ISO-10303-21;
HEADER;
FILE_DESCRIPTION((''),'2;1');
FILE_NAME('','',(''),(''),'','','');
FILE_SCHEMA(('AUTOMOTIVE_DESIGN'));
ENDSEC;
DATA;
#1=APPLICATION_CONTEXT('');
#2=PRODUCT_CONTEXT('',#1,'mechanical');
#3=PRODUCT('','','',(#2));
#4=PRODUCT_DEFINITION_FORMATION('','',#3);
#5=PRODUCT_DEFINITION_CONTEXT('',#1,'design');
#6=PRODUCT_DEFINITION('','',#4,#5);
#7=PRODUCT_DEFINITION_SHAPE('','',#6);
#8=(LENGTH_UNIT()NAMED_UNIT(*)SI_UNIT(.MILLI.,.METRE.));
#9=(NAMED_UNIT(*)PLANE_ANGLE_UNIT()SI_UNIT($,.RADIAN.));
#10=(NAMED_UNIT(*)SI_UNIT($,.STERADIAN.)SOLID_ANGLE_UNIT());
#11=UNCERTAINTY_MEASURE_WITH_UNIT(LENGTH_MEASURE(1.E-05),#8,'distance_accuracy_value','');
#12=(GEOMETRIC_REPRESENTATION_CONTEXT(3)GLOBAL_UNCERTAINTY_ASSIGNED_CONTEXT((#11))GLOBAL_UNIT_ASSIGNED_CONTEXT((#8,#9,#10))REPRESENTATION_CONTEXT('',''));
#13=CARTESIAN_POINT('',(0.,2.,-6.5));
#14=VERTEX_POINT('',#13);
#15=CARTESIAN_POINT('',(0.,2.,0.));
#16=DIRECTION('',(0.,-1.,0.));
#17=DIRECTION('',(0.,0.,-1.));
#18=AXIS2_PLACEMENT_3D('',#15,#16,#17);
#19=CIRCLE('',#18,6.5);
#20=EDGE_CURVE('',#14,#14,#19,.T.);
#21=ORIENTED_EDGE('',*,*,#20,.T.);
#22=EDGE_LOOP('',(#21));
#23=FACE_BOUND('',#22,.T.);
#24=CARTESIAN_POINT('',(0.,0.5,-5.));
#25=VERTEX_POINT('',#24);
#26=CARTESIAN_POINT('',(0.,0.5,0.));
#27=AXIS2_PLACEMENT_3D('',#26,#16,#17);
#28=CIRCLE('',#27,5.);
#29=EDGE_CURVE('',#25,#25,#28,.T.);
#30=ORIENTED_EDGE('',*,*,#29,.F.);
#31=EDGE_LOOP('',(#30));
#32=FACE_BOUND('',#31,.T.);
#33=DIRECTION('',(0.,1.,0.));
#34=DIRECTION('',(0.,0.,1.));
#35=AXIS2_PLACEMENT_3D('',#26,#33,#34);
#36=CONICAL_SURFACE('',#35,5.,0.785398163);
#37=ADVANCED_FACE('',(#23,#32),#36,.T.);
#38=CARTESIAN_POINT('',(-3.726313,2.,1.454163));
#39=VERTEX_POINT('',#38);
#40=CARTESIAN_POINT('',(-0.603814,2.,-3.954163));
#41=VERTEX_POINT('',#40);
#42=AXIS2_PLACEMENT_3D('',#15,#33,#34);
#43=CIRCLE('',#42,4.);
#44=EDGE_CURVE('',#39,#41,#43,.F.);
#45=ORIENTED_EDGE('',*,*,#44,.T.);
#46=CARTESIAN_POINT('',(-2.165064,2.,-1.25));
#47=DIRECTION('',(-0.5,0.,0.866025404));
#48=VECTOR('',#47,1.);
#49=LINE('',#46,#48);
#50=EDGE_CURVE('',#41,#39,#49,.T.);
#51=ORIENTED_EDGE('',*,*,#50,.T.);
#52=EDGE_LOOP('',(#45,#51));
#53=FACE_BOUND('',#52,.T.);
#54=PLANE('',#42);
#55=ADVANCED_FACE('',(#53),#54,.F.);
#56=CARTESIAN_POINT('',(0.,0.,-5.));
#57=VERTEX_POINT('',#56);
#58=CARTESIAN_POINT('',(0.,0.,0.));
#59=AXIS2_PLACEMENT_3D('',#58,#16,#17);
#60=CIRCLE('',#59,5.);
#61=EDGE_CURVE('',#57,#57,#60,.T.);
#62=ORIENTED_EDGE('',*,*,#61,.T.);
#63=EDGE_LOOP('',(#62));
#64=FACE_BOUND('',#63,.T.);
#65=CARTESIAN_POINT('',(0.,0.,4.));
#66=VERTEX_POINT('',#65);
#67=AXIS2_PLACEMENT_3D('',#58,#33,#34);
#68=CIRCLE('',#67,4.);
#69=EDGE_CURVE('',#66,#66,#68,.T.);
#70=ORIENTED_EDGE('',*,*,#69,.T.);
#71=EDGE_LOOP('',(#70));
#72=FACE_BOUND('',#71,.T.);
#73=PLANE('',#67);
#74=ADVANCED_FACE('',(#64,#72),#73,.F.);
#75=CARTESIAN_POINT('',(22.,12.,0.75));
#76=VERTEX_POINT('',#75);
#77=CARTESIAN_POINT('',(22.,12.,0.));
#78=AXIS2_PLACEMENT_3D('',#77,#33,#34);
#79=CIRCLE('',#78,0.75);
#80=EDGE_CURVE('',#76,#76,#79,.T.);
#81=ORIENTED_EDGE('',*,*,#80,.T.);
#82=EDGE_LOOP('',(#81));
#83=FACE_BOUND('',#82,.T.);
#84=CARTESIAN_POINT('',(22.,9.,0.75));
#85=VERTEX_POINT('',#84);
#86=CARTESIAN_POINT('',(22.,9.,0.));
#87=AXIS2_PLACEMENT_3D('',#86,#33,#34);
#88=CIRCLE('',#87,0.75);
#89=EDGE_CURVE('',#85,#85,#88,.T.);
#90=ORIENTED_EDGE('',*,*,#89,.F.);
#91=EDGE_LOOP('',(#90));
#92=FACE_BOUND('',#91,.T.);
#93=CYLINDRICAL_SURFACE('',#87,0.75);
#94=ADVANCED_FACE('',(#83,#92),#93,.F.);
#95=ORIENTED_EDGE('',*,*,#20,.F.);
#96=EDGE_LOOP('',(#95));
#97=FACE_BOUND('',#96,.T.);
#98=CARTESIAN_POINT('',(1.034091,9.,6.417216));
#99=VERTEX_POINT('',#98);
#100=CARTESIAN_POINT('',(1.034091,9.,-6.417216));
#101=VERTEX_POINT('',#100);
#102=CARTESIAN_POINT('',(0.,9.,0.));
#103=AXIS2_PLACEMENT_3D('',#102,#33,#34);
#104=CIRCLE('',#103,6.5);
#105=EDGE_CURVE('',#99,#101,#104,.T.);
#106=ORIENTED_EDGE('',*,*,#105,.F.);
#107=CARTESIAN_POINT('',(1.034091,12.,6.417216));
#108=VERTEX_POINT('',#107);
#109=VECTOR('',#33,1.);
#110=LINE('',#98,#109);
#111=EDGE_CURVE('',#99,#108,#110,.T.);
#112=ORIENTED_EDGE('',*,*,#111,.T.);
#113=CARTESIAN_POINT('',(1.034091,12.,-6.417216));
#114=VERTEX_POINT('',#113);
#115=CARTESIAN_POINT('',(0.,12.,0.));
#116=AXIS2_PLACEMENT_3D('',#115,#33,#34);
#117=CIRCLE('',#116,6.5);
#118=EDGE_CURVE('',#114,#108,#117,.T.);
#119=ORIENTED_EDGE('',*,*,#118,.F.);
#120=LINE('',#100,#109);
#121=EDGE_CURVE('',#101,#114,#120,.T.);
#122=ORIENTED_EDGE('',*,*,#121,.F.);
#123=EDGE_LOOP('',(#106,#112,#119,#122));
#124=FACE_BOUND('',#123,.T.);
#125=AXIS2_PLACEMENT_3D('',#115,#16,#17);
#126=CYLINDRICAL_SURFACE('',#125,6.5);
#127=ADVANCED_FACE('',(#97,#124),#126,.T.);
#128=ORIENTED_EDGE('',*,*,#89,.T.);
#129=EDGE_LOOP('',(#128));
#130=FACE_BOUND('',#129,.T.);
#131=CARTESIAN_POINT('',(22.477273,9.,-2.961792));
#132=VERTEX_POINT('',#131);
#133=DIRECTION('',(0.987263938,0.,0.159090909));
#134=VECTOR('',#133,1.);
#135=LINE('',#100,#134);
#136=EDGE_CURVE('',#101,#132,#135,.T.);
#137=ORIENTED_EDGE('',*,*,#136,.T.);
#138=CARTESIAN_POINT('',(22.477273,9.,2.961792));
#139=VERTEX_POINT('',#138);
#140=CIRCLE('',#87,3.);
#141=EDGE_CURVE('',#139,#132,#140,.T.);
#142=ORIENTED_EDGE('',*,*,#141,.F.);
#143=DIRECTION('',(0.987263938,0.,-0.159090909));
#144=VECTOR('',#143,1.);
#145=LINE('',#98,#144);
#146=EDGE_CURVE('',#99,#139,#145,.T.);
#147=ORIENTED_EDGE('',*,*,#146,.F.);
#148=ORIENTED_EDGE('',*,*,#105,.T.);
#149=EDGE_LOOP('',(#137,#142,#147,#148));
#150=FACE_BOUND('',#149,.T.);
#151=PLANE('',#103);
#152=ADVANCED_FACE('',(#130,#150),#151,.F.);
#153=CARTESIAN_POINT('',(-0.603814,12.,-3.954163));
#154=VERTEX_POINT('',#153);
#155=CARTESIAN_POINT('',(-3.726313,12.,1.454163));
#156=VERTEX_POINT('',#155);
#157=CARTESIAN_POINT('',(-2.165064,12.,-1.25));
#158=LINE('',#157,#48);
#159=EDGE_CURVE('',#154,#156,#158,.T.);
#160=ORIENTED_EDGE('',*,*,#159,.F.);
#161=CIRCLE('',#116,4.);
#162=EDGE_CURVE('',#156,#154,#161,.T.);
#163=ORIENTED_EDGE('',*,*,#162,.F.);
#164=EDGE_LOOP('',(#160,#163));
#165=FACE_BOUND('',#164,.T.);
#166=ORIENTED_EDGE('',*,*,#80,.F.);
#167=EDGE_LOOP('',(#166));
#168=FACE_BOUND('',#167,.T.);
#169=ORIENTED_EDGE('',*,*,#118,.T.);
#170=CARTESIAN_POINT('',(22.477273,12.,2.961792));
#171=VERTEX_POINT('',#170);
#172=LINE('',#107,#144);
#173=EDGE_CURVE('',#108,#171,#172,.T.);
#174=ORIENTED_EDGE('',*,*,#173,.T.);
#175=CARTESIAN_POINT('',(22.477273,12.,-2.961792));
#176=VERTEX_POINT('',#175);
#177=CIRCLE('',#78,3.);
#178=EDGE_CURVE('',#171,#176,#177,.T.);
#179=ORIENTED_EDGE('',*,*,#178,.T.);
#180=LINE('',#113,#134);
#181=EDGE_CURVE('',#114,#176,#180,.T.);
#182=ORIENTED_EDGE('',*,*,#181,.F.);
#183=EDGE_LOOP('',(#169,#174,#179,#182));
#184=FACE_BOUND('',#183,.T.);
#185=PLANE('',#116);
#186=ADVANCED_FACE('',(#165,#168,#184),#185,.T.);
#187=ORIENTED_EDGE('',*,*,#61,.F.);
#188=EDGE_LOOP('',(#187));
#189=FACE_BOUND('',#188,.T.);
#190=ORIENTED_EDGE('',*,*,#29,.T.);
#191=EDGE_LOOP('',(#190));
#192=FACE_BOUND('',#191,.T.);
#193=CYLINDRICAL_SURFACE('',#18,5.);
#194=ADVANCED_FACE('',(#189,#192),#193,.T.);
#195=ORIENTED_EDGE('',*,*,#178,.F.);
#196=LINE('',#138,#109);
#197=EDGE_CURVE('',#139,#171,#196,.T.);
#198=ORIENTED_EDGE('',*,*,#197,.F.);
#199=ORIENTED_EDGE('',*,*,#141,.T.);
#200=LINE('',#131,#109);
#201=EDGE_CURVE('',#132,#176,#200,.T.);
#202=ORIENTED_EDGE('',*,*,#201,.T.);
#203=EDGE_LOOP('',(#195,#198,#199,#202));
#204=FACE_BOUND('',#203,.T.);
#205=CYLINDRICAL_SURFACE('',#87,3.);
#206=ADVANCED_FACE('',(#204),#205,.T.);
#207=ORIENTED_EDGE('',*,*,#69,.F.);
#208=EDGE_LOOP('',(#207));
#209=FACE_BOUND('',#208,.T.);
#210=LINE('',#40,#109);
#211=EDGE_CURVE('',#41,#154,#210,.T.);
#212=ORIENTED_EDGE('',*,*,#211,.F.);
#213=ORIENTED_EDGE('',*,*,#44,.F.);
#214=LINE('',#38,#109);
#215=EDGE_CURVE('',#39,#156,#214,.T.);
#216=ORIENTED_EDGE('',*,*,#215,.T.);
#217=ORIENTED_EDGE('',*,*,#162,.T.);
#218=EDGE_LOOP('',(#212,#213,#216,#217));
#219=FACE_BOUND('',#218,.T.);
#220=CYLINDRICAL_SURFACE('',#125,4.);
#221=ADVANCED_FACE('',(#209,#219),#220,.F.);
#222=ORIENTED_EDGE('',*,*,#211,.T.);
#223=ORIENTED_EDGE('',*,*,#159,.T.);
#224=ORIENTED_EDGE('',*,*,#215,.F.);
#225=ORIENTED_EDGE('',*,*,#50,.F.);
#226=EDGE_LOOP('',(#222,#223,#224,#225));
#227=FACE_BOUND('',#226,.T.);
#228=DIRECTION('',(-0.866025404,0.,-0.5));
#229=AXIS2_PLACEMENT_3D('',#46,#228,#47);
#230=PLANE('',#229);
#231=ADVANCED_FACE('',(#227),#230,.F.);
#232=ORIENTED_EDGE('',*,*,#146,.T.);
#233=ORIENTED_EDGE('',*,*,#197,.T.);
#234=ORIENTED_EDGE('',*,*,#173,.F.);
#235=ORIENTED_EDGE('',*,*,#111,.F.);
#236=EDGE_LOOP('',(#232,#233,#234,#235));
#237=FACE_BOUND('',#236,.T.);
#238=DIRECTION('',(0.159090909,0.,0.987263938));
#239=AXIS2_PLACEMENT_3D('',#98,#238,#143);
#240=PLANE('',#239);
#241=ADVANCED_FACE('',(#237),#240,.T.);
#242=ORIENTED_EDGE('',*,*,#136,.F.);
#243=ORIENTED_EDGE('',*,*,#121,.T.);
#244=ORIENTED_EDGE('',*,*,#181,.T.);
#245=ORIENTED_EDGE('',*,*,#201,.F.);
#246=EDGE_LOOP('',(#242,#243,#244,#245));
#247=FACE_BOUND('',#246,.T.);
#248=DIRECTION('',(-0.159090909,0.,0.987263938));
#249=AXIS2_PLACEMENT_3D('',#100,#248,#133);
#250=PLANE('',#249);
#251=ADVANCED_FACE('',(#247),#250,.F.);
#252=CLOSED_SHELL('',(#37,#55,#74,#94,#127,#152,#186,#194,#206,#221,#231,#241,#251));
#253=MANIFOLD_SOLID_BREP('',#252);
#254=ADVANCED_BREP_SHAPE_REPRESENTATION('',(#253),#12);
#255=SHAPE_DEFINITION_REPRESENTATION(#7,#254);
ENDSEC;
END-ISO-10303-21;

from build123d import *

# Parameters (mm, degrees)
SKETCH1_R           = 6.5
SKETCH1_R_2         = 4
BOSS_EXTRUDE1_DEPTH = 12
BOSS_EXTRUDE2_START = -3
SKETCH2_R           = 0.75
BOSS_EXTRUDE2_DEPTH = 3
SKETCH4_R           = 6.5
SKETCH4_R_2         = 5
CUT_EXTRUDE1_DEPTH  = 2
BOSS_EXTRUDE4_START = -10
BOSS_EXTRUDE4_DEPTH = 10
CHAMFER1_SIZE       = 1.5


with BuildPart() as part:
    # Sketch1 → Boss-Extrude1 (new body)
    with BuildSketch(Plane(origin=(0, 0, 0), x_dir=(1, 0, 0), z_dir=(0, 1, 0))):
        with Locations(Location((0, 0, 0), (0, 0, 270))):
            Circle(SKETCH1_R)
        with Locations(Location((0, 0, 0), (0, 0, 270))):
            Circle(SKETCH1_R_2, mode=Mode.SUBTRACT)
    extrude(amount=BOSS_EXTRUDE1_DEPTH)

    # Sketch2 → Boss-Extrude2 (add)
    with BuildSketch(Plane(origin=(0, 12, 0), x_dir=(1, 0, 0), z_dir=(0, 1, 0)).offset(BOSS_EXTRUDE2_START)):
        with BuildLine():
            Line((22.477272727, 2.961791813), (1.034090909, 6.417215595))
            ThreePointArc((1.034090909, 6.417215595), (4.948312384, 4.214760319), (6.5, 0))
            ThreePointArc((6.5, 0), (4.948312384, -4.214760319), (1.034090909, -6.417215595))
            Line((1.034090909, -6.417215595), (22.477272727, -2.961791813))
            ThreePointArc((22.477272727, -2.961791813), (25, 0), (22.477272727, 2.961791813))
        make_face()
        with Locations(Location((22, 0, 0), (0, 0, 270))):
            Circle(SKETCH2_R, mode=Mode.SUBTRACT)
    extrude(amount=BOSS_EXTRUDE2_DEPTH)

    # Sketch4 → Cut-Extrude1 (cut)
    with BuildSketch(Plane.XZ):
        with Locations(Location((0, 0, 0), (0, 0, 270))):
            Circle(SKETCH4_R)
        with Locations(Location((0, 0, 0), (0, 0, 270))):
            Circle(SKETCH4_R_2, mode=Mode.SUBTRACT)
    extrude(amount=-CUT_EXTRUDE1_DEPTH, mode=Mode.SUBTRACT)

    # Sketch5 → Boss-Extrude4 (add)
    with BuildSketch(Plane(origin=(0, 12, 0), x_dir=(1, 0, 0), z_dir=(0, 1, 0)).offset(BOSS_EXTRUDE4_START)):
        with BuildLine():
            Line((-3.726313009, -1.454163457), (-0.60381401, 3.954163457))
            ThreePointArc((-0.60381401, 3.954163457), (-3.464101615, 2), (-3.726313009, -1.454163457))
        make_face()
    extrude(amount=BOSS_EXTRUDE4_DEPTH)

    # Chamfer1
    chamfer1_edges = [part.edges().sort_by_distance(p)[0] for p in [
        (0, 2, 5),
    ]]
    chamfer(chamfer1_edges, length=CHAMFER1_SIZE - 0.0001)  # a hair under: the kernel refuses the full size


solid = part.part
